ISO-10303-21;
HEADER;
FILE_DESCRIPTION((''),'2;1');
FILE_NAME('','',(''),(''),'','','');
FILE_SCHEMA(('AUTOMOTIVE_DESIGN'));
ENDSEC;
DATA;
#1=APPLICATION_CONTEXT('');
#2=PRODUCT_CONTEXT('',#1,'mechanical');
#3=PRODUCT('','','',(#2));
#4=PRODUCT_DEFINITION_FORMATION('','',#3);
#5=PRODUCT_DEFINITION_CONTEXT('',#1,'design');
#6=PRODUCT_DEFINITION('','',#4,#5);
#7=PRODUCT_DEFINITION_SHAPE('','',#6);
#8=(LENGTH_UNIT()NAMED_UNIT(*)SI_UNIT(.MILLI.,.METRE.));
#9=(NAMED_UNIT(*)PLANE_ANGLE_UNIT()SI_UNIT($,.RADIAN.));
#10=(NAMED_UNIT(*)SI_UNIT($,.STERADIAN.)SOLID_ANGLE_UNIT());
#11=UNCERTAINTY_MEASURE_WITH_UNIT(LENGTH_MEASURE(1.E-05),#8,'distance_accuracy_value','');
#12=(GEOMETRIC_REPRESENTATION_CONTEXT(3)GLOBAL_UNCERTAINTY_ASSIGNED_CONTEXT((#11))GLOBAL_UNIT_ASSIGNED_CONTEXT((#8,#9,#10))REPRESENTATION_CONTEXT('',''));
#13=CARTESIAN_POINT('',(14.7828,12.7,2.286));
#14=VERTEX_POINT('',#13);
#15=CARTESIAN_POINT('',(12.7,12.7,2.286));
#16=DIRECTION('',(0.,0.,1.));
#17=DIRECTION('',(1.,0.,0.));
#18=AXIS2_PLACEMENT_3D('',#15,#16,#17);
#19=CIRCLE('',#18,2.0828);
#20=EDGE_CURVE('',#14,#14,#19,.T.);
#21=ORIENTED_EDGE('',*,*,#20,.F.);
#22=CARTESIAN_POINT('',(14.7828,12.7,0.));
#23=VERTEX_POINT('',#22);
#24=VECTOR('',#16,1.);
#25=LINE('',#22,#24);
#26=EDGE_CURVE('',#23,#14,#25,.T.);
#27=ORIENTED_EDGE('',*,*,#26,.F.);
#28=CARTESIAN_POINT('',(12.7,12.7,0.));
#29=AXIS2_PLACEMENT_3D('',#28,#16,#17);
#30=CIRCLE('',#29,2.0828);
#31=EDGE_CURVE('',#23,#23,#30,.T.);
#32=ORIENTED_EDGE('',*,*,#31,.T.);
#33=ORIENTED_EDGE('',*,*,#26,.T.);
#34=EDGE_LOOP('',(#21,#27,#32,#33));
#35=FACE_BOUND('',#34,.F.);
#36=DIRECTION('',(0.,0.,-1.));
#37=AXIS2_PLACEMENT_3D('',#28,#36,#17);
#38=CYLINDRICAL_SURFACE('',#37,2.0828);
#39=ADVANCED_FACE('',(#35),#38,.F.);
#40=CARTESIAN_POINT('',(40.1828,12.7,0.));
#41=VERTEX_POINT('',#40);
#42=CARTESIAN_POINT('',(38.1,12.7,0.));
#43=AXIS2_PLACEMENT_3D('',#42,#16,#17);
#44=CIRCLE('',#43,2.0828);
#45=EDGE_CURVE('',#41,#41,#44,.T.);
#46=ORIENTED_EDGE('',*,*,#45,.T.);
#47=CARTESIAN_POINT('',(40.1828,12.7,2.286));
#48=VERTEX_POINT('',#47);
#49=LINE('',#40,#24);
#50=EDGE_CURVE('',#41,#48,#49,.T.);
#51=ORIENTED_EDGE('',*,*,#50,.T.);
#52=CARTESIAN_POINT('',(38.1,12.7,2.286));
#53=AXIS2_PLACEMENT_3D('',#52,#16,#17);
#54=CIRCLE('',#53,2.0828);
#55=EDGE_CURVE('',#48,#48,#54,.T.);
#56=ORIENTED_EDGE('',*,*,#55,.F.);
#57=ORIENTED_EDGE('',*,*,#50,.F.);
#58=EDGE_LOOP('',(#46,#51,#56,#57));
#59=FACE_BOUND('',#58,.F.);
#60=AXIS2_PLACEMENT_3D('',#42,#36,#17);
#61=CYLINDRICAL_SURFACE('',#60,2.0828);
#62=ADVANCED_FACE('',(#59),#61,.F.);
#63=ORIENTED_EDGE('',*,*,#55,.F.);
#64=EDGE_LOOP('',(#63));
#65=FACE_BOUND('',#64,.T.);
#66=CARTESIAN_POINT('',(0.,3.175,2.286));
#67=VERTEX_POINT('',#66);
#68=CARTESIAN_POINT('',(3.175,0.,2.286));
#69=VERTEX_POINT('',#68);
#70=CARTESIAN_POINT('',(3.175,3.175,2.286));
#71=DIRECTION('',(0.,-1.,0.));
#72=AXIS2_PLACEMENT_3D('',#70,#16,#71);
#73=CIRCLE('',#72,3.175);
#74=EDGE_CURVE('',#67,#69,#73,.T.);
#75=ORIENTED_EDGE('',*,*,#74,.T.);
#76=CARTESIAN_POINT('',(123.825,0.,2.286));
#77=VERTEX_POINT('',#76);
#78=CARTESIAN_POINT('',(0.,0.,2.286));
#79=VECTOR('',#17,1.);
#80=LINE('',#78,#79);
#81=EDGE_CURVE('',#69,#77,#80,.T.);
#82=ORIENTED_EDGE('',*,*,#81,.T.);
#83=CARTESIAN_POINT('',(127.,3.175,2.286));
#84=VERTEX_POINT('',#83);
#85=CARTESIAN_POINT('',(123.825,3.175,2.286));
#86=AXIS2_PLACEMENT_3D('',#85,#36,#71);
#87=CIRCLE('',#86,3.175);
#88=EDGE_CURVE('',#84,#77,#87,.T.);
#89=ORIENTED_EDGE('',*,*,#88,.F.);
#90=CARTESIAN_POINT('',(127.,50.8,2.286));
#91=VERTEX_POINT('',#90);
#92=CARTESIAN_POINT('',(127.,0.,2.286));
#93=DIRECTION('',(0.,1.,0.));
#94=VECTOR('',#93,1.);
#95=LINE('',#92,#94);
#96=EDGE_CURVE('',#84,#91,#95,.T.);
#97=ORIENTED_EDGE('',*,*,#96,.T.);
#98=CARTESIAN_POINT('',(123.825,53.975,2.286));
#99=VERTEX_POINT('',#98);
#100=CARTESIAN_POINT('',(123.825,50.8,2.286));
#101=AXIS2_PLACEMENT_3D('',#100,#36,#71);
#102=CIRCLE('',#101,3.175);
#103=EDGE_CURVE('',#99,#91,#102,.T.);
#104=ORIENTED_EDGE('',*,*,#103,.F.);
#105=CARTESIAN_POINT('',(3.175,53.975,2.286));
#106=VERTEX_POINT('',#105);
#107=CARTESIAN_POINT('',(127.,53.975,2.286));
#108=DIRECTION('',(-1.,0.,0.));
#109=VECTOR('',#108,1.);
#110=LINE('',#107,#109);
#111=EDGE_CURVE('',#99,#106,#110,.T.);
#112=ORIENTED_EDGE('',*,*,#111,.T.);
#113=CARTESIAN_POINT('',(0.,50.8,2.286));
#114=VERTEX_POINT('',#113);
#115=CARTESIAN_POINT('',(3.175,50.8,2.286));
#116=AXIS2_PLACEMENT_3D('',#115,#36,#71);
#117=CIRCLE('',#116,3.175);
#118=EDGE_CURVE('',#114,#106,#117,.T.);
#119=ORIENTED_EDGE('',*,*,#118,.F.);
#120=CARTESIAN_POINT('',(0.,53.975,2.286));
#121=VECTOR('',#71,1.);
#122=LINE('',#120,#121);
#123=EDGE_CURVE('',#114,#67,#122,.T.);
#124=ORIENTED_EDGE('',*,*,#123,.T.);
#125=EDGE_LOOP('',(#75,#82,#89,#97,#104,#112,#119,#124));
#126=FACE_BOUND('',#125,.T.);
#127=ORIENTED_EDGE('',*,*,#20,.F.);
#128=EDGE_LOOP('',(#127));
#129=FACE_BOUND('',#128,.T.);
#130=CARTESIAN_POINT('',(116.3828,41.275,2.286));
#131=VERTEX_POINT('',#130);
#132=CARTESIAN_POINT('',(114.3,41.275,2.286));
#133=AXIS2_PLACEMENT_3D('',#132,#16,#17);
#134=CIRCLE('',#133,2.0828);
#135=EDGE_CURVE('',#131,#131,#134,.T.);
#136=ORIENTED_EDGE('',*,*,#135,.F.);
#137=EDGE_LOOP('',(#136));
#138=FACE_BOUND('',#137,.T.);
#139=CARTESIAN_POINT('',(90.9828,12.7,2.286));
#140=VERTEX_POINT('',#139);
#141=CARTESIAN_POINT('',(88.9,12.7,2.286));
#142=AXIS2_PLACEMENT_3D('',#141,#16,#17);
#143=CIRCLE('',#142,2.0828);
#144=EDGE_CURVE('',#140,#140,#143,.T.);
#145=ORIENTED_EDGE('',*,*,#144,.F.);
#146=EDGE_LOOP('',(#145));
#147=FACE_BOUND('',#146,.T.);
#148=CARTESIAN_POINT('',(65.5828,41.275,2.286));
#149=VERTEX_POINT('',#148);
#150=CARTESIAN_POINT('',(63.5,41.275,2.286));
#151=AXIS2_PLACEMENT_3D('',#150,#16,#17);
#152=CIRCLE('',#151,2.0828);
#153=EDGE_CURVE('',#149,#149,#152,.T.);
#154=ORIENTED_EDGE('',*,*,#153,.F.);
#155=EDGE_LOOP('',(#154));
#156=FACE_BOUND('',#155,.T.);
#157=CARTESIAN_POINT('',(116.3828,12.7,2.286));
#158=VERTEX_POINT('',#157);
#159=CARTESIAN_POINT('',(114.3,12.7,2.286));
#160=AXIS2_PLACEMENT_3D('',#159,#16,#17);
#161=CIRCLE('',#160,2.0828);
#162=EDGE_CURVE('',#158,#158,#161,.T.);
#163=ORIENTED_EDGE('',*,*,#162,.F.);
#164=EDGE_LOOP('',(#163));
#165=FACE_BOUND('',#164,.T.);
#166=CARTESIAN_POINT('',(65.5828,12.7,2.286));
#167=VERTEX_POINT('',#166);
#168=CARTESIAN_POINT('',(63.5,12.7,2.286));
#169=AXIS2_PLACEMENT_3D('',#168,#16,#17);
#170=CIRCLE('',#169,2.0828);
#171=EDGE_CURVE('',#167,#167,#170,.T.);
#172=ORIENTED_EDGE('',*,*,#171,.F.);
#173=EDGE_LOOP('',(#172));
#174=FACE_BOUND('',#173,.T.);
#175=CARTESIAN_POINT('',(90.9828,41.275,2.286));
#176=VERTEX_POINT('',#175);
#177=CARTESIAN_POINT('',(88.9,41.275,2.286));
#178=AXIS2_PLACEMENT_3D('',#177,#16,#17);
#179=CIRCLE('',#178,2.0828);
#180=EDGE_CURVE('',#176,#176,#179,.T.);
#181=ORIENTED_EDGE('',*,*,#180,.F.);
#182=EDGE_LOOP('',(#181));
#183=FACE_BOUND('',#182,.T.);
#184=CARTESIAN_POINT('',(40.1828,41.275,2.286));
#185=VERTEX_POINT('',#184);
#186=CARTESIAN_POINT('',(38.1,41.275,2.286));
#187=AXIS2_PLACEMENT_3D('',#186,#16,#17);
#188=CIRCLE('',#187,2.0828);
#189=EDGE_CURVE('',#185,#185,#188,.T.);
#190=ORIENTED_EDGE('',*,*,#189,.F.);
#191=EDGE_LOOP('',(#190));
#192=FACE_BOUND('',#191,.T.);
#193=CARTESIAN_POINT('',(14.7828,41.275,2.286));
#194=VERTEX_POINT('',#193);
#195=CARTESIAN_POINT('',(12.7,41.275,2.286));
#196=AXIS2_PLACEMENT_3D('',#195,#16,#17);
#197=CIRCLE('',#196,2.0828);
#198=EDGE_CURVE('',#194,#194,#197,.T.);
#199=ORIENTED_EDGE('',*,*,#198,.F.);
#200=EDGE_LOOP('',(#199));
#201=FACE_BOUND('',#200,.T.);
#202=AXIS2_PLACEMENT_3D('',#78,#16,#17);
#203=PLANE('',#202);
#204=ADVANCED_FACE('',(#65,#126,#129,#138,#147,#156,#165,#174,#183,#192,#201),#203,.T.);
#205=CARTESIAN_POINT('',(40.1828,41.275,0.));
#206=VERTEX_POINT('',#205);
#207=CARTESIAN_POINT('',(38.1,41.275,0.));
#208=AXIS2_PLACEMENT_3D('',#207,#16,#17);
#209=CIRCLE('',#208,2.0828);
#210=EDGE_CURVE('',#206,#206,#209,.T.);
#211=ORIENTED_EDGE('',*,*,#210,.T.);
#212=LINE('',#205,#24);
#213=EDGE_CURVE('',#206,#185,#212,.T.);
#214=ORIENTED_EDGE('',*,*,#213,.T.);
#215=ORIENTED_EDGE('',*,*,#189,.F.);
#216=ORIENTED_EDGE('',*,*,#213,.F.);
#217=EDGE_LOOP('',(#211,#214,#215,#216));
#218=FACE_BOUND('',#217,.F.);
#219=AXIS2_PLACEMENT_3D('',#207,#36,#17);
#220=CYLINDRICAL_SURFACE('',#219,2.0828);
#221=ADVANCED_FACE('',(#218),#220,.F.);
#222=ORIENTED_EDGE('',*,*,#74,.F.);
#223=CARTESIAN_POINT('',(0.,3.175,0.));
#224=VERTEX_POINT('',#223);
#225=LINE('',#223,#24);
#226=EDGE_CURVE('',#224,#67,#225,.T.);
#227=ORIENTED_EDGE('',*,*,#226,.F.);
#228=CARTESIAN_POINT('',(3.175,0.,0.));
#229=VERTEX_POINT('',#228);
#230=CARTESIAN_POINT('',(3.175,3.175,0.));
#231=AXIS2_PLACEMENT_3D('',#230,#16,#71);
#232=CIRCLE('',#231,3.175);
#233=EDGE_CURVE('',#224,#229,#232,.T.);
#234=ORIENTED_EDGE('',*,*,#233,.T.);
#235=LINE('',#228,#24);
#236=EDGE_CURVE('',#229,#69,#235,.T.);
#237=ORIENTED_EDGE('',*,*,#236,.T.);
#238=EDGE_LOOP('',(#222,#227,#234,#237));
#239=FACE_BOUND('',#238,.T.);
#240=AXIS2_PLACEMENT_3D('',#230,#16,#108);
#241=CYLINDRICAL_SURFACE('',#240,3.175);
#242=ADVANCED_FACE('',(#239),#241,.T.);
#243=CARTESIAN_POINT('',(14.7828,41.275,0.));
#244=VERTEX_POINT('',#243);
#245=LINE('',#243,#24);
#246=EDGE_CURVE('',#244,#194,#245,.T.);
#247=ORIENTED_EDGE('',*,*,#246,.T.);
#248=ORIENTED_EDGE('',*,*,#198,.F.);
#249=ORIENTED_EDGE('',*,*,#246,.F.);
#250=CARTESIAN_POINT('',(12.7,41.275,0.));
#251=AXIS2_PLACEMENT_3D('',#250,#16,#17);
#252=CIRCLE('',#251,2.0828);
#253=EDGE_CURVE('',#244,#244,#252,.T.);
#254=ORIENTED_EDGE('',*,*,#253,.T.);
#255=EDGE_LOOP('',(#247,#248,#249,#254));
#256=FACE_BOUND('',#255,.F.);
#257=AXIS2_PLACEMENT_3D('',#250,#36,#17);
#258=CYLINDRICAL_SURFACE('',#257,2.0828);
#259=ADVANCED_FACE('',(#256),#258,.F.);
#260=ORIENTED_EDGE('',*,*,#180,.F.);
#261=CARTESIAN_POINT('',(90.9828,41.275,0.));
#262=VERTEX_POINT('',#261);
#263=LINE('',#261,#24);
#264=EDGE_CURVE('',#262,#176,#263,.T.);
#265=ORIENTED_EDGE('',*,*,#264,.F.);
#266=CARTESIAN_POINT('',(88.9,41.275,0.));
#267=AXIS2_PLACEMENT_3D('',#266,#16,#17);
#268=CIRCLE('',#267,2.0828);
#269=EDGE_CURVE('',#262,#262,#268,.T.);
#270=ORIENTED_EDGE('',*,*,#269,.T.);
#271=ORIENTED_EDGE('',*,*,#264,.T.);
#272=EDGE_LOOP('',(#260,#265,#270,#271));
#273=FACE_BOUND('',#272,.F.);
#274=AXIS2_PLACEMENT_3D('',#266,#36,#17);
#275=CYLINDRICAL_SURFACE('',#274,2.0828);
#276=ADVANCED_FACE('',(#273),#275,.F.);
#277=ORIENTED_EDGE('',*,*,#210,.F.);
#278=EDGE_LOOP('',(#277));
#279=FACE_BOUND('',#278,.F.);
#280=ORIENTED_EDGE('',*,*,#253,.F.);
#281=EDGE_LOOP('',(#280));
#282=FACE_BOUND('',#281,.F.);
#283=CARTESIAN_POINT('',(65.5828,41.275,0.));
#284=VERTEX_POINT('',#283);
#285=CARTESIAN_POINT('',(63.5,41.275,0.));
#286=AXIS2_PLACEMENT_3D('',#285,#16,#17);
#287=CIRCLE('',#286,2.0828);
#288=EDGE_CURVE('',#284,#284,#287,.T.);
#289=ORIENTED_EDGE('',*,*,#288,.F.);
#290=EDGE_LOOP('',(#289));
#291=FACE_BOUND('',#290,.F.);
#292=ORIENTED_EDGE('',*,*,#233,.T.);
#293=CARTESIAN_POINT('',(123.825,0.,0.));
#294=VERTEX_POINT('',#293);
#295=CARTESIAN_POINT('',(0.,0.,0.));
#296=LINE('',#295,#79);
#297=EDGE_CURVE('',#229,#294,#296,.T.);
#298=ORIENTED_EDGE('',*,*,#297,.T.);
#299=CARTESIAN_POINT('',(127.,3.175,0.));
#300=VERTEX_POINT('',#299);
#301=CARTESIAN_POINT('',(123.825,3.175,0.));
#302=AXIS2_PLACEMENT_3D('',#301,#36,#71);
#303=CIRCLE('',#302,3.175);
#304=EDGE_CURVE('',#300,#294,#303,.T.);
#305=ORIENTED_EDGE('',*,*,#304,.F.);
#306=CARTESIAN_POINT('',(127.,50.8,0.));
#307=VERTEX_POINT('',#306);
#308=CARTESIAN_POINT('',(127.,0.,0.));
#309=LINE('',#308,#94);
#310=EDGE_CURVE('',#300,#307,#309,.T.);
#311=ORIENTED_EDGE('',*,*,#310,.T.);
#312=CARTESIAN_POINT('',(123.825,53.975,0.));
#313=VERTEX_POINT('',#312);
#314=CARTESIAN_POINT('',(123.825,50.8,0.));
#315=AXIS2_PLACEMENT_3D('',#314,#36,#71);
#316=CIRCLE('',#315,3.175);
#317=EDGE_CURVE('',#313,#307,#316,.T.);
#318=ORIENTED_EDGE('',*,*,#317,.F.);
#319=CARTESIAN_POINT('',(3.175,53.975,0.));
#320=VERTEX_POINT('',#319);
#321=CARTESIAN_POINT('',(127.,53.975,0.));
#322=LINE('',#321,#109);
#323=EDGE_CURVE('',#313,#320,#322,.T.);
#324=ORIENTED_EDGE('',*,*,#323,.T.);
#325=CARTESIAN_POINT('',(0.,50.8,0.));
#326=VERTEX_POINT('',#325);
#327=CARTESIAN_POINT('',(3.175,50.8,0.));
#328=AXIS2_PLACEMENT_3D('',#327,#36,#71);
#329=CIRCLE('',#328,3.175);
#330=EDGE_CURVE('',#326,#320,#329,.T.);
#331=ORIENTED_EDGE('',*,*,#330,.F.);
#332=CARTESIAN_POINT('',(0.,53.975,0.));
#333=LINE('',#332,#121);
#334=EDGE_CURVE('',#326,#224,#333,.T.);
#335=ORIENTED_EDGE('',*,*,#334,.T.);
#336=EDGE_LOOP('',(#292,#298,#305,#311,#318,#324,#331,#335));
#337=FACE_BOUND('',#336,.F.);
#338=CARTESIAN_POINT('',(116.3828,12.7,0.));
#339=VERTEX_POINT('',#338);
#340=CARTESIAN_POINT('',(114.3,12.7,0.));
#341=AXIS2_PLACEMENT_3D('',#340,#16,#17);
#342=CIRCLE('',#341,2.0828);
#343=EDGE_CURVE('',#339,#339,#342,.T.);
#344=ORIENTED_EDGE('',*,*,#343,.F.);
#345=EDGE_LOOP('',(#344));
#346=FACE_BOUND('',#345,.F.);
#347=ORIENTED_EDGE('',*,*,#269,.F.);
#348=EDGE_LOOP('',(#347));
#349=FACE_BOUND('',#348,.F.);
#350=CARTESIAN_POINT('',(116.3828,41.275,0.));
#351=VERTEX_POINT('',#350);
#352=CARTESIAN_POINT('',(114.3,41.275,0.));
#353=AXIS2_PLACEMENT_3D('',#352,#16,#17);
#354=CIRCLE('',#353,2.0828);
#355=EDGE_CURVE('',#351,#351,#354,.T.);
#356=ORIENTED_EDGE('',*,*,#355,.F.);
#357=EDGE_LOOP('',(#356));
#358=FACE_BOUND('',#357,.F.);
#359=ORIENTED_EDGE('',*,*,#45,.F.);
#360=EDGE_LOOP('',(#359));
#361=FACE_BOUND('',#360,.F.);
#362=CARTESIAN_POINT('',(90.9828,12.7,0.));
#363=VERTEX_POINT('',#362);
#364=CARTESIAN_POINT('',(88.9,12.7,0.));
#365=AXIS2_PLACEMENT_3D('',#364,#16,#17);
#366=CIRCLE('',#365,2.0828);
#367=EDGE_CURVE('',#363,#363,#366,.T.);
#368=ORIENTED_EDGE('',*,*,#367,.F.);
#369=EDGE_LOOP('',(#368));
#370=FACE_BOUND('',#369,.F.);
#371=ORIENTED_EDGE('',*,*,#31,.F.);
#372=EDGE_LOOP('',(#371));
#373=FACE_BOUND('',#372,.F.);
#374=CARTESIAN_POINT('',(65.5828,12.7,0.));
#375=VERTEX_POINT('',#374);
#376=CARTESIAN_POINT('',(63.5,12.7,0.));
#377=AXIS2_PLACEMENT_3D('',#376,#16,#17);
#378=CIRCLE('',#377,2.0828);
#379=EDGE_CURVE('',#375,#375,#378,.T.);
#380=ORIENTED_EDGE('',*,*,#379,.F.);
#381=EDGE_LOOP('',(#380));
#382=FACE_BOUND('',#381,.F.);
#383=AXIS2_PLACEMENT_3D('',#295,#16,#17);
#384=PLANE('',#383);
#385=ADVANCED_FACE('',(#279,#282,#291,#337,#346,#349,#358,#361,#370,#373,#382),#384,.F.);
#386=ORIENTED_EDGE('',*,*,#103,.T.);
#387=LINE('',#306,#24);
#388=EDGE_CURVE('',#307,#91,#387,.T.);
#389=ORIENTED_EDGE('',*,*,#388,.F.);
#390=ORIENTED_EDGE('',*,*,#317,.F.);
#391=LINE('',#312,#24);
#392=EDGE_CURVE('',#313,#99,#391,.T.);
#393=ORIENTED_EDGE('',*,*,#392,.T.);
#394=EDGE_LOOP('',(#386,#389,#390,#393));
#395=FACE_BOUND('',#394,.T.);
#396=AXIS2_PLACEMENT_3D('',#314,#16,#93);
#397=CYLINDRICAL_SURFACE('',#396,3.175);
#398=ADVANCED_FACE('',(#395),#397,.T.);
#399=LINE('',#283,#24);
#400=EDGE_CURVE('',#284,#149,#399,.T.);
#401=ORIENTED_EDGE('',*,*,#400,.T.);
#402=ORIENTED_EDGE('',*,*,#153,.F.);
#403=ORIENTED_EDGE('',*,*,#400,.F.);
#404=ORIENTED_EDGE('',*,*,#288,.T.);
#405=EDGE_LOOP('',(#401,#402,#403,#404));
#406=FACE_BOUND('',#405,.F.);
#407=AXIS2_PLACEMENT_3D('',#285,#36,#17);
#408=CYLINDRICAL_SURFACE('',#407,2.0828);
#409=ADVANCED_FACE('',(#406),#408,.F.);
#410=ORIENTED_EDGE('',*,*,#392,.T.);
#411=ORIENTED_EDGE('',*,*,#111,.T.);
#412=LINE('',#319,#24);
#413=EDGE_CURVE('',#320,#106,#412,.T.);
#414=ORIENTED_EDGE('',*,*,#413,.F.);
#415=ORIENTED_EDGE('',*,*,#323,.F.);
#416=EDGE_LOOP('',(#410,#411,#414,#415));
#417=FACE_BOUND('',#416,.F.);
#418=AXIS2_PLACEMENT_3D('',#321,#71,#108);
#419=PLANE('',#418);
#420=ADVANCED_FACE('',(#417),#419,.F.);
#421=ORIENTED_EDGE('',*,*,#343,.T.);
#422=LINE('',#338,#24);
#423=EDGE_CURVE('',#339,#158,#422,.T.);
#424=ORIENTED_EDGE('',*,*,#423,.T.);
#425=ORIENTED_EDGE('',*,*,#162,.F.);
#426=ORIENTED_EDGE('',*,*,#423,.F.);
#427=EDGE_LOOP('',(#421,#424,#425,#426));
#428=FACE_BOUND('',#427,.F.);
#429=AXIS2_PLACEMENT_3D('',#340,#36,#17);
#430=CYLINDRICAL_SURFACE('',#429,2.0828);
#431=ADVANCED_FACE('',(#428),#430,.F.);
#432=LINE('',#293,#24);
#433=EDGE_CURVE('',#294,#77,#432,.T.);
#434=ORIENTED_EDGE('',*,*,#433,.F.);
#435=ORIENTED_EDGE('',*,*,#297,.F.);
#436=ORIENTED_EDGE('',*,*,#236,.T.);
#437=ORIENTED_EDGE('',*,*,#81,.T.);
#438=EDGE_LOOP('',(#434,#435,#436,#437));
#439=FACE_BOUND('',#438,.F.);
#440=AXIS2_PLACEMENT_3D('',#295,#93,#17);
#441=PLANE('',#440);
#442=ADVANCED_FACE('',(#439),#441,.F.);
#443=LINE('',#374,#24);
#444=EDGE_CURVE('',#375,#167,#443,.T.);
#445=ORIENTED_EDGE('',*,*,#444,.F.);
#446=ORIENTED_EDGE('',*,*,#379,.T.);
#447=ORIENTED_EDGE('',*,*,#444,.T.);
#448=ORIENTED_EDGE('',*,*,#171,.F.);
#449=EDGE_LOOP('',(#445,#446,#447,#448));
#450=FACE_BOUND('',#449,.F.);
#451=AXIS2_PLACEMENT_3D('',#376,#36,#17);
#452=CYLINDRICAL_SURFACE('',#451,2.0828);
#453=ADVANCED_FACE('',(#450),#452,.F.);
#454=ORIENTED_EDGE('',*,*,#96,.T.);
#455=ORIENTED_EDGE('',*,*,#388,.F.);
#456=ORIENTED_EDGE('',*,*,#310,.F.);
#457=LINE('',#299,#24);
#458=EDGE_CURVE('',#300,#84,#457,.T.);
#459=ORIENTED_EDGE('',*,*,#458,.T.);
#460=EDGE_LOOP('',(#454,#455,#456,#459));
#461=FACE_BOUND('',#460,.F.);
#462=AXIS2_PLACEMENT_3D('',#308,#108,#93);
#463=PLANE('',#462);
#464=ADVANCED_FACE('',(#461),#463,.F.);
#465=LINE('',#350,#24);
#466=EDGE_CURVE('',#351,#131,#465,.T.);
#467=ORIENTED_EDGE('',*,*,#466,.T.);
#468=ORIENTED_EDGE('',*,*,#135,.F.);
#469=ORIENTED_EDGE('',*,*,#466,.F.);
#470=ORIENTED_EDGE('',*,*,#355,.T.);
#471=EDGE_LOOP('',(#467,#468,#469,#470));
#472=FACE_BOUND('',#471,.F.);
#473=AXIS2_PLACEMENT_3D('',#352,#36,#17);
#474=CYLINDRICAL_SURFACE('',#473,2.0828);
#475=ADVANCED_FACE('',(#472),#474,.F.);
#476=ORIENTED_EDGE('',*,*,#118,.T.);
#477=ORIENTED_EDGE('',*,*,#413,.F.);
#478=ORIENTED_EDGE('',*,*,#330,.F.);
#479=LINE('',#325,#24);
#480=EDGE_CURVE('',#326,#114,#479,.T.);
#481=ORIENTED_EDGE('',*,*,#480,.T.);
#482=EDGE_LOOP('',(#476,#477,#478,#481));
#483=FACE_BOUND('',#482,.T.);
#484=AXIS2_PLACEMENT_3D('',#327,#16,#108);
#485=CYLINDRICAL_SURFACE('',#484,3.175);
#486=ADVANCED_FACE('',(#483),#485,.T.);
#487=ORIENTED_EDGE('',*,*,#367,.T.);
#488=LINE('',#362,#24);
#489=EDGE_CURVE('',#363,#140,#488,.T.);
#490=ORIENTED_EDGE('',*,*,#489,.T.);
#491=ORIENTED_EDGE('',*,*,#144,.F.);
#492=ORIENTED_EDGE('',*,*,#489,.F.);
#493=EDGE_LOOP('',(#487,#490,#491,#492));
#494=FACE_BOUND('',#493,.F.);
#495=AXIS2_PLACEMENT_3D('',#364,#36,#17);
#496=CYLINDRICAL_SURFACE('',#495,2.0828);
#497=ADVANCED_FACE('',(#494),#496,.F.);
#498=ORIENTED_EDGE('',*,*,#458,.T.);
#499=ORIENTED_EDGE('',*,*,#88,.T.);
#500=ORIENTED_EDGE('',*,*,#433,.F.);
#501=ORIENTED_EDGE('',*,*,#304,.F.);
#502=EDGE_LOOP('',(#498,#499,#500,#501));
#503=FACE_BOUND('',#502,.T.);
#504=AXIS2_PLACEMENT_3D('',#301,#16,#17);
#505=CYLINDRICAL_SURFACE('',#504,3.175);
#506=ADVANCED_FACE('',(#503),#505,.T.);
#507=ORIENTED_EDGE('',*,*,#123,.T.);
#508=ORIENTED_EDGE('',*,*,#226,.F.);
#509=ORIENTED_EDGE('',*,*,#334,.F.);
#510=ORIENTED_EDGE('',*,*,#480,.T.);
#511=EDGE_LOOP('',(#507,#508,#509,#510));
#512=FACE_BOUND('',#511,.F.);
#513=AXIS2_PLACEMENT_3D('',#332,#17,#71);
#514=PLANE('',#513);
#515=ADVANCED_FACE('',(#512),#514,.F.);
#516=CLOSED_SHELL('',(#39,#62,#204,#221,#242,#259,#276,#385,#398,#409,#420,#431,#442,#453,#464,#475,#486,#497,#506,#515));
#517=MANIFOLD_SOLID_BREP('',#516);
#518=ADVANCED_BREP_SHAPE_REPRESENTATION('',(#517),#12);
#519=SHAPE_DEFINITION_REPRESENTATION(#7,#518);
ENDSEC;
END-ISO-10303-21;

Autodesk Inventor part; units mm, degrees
ref_plane "YZ Plane" through (0, 0, 0) normal (1, 0, 0) x (0, 1, 0)
ref_plane "XZ Plane" through (0, 0, 0) normal (0, 1, 0) x (-1, 0, 0)
ref_plane "XY Plane" through (0, 0, 0) normal (0, 0, 1) x (1, 0, 0)
sketch "Sketch1" plane through (0, 0, 0) normal (0, 0, 1) x (1, 0, 0)
  line L0 (0, 0) -> (127, 0)
  line L1 (127, 0) -> (127, 53.975)
  line L2 (127, 53.975) -> (0, 53.975)
  line L3 (0, 53.975) -> (0, 0)
  line L4 (0, 53.975) -> (127, 53.975) construction
  line L5 (127, 53.975) -> (127, 26.9875) construction
  line L6 (127, 26.9875) -> (0, 26.9875) construction
  line L7 (0, 26.9875) -> (0, 53.975) construction
  circle A0 centre (114.3, 41.275) radius 2.0828
  circle A1 centre (88.9, 41.275) radius 2.0828
  circle A2 centre (63.5, 41.275) radius 2.0828
  line L8 (0, 26.9875) -> (127, 26.9875) construction
  circle A3 centre (114.3, 12.7) radius 2.0828
  circle A4 centre (88.9, 12.7) radius 2.0828
  circle A5 centre (63.5, 12.7) radius 2.0828
  circle A6 centre (38.1, 41.275) radius 2.0828
  circle A7 centre (12.7, 41.275) radius 2.0828
  circle A8 centre (38.1, 12.7) radius 2.0828
  circle A9 centre (12.7, 12.7) radius 2.0828
  dimension "d0" = 127
  dimension "d1" = 53.975
  dimension "d2" = 26.9875
  dimension "d3" = 4.1656
  dimension "d4" = 12.7
  dimension "d7" = 25.4
  dimension "d12" = 12.7
extrude "Plate1" add sketch "Sketch1" along normal blind 2.286
fillet "Fillet1" radius 3.175 4 edges at (127, 53.975, 1.143) (0, 53.975, 1.143) (127, 0, 1.143) (0, 0, 1.143)
equation "\"d2\" = 0.5 * d1"
equation "\"BendRadius\" = Thickness"
equation "\"BendReliefWidth\" = Thickness"
equation "\"BendReliefDepth\" = 0.5 * Thickness"
equation "\"CornerReliefSize\" = 4 * Thickness"
equation "\"MinimumRemnant\" = 2 * Thickness"
equation "\"TransitionRadius\" = BendRadius"
equation "\"JacobiRadiusSize\" = BendRadius"
equation "\"GapSize\" = Thickness"
equation "\"d13\" = BendRadius"
equation "\"Thickness\" = 2.286"
properties part number "Support for Connect Arm to Funnel  (Custom)" material "Aluminum 6061"
